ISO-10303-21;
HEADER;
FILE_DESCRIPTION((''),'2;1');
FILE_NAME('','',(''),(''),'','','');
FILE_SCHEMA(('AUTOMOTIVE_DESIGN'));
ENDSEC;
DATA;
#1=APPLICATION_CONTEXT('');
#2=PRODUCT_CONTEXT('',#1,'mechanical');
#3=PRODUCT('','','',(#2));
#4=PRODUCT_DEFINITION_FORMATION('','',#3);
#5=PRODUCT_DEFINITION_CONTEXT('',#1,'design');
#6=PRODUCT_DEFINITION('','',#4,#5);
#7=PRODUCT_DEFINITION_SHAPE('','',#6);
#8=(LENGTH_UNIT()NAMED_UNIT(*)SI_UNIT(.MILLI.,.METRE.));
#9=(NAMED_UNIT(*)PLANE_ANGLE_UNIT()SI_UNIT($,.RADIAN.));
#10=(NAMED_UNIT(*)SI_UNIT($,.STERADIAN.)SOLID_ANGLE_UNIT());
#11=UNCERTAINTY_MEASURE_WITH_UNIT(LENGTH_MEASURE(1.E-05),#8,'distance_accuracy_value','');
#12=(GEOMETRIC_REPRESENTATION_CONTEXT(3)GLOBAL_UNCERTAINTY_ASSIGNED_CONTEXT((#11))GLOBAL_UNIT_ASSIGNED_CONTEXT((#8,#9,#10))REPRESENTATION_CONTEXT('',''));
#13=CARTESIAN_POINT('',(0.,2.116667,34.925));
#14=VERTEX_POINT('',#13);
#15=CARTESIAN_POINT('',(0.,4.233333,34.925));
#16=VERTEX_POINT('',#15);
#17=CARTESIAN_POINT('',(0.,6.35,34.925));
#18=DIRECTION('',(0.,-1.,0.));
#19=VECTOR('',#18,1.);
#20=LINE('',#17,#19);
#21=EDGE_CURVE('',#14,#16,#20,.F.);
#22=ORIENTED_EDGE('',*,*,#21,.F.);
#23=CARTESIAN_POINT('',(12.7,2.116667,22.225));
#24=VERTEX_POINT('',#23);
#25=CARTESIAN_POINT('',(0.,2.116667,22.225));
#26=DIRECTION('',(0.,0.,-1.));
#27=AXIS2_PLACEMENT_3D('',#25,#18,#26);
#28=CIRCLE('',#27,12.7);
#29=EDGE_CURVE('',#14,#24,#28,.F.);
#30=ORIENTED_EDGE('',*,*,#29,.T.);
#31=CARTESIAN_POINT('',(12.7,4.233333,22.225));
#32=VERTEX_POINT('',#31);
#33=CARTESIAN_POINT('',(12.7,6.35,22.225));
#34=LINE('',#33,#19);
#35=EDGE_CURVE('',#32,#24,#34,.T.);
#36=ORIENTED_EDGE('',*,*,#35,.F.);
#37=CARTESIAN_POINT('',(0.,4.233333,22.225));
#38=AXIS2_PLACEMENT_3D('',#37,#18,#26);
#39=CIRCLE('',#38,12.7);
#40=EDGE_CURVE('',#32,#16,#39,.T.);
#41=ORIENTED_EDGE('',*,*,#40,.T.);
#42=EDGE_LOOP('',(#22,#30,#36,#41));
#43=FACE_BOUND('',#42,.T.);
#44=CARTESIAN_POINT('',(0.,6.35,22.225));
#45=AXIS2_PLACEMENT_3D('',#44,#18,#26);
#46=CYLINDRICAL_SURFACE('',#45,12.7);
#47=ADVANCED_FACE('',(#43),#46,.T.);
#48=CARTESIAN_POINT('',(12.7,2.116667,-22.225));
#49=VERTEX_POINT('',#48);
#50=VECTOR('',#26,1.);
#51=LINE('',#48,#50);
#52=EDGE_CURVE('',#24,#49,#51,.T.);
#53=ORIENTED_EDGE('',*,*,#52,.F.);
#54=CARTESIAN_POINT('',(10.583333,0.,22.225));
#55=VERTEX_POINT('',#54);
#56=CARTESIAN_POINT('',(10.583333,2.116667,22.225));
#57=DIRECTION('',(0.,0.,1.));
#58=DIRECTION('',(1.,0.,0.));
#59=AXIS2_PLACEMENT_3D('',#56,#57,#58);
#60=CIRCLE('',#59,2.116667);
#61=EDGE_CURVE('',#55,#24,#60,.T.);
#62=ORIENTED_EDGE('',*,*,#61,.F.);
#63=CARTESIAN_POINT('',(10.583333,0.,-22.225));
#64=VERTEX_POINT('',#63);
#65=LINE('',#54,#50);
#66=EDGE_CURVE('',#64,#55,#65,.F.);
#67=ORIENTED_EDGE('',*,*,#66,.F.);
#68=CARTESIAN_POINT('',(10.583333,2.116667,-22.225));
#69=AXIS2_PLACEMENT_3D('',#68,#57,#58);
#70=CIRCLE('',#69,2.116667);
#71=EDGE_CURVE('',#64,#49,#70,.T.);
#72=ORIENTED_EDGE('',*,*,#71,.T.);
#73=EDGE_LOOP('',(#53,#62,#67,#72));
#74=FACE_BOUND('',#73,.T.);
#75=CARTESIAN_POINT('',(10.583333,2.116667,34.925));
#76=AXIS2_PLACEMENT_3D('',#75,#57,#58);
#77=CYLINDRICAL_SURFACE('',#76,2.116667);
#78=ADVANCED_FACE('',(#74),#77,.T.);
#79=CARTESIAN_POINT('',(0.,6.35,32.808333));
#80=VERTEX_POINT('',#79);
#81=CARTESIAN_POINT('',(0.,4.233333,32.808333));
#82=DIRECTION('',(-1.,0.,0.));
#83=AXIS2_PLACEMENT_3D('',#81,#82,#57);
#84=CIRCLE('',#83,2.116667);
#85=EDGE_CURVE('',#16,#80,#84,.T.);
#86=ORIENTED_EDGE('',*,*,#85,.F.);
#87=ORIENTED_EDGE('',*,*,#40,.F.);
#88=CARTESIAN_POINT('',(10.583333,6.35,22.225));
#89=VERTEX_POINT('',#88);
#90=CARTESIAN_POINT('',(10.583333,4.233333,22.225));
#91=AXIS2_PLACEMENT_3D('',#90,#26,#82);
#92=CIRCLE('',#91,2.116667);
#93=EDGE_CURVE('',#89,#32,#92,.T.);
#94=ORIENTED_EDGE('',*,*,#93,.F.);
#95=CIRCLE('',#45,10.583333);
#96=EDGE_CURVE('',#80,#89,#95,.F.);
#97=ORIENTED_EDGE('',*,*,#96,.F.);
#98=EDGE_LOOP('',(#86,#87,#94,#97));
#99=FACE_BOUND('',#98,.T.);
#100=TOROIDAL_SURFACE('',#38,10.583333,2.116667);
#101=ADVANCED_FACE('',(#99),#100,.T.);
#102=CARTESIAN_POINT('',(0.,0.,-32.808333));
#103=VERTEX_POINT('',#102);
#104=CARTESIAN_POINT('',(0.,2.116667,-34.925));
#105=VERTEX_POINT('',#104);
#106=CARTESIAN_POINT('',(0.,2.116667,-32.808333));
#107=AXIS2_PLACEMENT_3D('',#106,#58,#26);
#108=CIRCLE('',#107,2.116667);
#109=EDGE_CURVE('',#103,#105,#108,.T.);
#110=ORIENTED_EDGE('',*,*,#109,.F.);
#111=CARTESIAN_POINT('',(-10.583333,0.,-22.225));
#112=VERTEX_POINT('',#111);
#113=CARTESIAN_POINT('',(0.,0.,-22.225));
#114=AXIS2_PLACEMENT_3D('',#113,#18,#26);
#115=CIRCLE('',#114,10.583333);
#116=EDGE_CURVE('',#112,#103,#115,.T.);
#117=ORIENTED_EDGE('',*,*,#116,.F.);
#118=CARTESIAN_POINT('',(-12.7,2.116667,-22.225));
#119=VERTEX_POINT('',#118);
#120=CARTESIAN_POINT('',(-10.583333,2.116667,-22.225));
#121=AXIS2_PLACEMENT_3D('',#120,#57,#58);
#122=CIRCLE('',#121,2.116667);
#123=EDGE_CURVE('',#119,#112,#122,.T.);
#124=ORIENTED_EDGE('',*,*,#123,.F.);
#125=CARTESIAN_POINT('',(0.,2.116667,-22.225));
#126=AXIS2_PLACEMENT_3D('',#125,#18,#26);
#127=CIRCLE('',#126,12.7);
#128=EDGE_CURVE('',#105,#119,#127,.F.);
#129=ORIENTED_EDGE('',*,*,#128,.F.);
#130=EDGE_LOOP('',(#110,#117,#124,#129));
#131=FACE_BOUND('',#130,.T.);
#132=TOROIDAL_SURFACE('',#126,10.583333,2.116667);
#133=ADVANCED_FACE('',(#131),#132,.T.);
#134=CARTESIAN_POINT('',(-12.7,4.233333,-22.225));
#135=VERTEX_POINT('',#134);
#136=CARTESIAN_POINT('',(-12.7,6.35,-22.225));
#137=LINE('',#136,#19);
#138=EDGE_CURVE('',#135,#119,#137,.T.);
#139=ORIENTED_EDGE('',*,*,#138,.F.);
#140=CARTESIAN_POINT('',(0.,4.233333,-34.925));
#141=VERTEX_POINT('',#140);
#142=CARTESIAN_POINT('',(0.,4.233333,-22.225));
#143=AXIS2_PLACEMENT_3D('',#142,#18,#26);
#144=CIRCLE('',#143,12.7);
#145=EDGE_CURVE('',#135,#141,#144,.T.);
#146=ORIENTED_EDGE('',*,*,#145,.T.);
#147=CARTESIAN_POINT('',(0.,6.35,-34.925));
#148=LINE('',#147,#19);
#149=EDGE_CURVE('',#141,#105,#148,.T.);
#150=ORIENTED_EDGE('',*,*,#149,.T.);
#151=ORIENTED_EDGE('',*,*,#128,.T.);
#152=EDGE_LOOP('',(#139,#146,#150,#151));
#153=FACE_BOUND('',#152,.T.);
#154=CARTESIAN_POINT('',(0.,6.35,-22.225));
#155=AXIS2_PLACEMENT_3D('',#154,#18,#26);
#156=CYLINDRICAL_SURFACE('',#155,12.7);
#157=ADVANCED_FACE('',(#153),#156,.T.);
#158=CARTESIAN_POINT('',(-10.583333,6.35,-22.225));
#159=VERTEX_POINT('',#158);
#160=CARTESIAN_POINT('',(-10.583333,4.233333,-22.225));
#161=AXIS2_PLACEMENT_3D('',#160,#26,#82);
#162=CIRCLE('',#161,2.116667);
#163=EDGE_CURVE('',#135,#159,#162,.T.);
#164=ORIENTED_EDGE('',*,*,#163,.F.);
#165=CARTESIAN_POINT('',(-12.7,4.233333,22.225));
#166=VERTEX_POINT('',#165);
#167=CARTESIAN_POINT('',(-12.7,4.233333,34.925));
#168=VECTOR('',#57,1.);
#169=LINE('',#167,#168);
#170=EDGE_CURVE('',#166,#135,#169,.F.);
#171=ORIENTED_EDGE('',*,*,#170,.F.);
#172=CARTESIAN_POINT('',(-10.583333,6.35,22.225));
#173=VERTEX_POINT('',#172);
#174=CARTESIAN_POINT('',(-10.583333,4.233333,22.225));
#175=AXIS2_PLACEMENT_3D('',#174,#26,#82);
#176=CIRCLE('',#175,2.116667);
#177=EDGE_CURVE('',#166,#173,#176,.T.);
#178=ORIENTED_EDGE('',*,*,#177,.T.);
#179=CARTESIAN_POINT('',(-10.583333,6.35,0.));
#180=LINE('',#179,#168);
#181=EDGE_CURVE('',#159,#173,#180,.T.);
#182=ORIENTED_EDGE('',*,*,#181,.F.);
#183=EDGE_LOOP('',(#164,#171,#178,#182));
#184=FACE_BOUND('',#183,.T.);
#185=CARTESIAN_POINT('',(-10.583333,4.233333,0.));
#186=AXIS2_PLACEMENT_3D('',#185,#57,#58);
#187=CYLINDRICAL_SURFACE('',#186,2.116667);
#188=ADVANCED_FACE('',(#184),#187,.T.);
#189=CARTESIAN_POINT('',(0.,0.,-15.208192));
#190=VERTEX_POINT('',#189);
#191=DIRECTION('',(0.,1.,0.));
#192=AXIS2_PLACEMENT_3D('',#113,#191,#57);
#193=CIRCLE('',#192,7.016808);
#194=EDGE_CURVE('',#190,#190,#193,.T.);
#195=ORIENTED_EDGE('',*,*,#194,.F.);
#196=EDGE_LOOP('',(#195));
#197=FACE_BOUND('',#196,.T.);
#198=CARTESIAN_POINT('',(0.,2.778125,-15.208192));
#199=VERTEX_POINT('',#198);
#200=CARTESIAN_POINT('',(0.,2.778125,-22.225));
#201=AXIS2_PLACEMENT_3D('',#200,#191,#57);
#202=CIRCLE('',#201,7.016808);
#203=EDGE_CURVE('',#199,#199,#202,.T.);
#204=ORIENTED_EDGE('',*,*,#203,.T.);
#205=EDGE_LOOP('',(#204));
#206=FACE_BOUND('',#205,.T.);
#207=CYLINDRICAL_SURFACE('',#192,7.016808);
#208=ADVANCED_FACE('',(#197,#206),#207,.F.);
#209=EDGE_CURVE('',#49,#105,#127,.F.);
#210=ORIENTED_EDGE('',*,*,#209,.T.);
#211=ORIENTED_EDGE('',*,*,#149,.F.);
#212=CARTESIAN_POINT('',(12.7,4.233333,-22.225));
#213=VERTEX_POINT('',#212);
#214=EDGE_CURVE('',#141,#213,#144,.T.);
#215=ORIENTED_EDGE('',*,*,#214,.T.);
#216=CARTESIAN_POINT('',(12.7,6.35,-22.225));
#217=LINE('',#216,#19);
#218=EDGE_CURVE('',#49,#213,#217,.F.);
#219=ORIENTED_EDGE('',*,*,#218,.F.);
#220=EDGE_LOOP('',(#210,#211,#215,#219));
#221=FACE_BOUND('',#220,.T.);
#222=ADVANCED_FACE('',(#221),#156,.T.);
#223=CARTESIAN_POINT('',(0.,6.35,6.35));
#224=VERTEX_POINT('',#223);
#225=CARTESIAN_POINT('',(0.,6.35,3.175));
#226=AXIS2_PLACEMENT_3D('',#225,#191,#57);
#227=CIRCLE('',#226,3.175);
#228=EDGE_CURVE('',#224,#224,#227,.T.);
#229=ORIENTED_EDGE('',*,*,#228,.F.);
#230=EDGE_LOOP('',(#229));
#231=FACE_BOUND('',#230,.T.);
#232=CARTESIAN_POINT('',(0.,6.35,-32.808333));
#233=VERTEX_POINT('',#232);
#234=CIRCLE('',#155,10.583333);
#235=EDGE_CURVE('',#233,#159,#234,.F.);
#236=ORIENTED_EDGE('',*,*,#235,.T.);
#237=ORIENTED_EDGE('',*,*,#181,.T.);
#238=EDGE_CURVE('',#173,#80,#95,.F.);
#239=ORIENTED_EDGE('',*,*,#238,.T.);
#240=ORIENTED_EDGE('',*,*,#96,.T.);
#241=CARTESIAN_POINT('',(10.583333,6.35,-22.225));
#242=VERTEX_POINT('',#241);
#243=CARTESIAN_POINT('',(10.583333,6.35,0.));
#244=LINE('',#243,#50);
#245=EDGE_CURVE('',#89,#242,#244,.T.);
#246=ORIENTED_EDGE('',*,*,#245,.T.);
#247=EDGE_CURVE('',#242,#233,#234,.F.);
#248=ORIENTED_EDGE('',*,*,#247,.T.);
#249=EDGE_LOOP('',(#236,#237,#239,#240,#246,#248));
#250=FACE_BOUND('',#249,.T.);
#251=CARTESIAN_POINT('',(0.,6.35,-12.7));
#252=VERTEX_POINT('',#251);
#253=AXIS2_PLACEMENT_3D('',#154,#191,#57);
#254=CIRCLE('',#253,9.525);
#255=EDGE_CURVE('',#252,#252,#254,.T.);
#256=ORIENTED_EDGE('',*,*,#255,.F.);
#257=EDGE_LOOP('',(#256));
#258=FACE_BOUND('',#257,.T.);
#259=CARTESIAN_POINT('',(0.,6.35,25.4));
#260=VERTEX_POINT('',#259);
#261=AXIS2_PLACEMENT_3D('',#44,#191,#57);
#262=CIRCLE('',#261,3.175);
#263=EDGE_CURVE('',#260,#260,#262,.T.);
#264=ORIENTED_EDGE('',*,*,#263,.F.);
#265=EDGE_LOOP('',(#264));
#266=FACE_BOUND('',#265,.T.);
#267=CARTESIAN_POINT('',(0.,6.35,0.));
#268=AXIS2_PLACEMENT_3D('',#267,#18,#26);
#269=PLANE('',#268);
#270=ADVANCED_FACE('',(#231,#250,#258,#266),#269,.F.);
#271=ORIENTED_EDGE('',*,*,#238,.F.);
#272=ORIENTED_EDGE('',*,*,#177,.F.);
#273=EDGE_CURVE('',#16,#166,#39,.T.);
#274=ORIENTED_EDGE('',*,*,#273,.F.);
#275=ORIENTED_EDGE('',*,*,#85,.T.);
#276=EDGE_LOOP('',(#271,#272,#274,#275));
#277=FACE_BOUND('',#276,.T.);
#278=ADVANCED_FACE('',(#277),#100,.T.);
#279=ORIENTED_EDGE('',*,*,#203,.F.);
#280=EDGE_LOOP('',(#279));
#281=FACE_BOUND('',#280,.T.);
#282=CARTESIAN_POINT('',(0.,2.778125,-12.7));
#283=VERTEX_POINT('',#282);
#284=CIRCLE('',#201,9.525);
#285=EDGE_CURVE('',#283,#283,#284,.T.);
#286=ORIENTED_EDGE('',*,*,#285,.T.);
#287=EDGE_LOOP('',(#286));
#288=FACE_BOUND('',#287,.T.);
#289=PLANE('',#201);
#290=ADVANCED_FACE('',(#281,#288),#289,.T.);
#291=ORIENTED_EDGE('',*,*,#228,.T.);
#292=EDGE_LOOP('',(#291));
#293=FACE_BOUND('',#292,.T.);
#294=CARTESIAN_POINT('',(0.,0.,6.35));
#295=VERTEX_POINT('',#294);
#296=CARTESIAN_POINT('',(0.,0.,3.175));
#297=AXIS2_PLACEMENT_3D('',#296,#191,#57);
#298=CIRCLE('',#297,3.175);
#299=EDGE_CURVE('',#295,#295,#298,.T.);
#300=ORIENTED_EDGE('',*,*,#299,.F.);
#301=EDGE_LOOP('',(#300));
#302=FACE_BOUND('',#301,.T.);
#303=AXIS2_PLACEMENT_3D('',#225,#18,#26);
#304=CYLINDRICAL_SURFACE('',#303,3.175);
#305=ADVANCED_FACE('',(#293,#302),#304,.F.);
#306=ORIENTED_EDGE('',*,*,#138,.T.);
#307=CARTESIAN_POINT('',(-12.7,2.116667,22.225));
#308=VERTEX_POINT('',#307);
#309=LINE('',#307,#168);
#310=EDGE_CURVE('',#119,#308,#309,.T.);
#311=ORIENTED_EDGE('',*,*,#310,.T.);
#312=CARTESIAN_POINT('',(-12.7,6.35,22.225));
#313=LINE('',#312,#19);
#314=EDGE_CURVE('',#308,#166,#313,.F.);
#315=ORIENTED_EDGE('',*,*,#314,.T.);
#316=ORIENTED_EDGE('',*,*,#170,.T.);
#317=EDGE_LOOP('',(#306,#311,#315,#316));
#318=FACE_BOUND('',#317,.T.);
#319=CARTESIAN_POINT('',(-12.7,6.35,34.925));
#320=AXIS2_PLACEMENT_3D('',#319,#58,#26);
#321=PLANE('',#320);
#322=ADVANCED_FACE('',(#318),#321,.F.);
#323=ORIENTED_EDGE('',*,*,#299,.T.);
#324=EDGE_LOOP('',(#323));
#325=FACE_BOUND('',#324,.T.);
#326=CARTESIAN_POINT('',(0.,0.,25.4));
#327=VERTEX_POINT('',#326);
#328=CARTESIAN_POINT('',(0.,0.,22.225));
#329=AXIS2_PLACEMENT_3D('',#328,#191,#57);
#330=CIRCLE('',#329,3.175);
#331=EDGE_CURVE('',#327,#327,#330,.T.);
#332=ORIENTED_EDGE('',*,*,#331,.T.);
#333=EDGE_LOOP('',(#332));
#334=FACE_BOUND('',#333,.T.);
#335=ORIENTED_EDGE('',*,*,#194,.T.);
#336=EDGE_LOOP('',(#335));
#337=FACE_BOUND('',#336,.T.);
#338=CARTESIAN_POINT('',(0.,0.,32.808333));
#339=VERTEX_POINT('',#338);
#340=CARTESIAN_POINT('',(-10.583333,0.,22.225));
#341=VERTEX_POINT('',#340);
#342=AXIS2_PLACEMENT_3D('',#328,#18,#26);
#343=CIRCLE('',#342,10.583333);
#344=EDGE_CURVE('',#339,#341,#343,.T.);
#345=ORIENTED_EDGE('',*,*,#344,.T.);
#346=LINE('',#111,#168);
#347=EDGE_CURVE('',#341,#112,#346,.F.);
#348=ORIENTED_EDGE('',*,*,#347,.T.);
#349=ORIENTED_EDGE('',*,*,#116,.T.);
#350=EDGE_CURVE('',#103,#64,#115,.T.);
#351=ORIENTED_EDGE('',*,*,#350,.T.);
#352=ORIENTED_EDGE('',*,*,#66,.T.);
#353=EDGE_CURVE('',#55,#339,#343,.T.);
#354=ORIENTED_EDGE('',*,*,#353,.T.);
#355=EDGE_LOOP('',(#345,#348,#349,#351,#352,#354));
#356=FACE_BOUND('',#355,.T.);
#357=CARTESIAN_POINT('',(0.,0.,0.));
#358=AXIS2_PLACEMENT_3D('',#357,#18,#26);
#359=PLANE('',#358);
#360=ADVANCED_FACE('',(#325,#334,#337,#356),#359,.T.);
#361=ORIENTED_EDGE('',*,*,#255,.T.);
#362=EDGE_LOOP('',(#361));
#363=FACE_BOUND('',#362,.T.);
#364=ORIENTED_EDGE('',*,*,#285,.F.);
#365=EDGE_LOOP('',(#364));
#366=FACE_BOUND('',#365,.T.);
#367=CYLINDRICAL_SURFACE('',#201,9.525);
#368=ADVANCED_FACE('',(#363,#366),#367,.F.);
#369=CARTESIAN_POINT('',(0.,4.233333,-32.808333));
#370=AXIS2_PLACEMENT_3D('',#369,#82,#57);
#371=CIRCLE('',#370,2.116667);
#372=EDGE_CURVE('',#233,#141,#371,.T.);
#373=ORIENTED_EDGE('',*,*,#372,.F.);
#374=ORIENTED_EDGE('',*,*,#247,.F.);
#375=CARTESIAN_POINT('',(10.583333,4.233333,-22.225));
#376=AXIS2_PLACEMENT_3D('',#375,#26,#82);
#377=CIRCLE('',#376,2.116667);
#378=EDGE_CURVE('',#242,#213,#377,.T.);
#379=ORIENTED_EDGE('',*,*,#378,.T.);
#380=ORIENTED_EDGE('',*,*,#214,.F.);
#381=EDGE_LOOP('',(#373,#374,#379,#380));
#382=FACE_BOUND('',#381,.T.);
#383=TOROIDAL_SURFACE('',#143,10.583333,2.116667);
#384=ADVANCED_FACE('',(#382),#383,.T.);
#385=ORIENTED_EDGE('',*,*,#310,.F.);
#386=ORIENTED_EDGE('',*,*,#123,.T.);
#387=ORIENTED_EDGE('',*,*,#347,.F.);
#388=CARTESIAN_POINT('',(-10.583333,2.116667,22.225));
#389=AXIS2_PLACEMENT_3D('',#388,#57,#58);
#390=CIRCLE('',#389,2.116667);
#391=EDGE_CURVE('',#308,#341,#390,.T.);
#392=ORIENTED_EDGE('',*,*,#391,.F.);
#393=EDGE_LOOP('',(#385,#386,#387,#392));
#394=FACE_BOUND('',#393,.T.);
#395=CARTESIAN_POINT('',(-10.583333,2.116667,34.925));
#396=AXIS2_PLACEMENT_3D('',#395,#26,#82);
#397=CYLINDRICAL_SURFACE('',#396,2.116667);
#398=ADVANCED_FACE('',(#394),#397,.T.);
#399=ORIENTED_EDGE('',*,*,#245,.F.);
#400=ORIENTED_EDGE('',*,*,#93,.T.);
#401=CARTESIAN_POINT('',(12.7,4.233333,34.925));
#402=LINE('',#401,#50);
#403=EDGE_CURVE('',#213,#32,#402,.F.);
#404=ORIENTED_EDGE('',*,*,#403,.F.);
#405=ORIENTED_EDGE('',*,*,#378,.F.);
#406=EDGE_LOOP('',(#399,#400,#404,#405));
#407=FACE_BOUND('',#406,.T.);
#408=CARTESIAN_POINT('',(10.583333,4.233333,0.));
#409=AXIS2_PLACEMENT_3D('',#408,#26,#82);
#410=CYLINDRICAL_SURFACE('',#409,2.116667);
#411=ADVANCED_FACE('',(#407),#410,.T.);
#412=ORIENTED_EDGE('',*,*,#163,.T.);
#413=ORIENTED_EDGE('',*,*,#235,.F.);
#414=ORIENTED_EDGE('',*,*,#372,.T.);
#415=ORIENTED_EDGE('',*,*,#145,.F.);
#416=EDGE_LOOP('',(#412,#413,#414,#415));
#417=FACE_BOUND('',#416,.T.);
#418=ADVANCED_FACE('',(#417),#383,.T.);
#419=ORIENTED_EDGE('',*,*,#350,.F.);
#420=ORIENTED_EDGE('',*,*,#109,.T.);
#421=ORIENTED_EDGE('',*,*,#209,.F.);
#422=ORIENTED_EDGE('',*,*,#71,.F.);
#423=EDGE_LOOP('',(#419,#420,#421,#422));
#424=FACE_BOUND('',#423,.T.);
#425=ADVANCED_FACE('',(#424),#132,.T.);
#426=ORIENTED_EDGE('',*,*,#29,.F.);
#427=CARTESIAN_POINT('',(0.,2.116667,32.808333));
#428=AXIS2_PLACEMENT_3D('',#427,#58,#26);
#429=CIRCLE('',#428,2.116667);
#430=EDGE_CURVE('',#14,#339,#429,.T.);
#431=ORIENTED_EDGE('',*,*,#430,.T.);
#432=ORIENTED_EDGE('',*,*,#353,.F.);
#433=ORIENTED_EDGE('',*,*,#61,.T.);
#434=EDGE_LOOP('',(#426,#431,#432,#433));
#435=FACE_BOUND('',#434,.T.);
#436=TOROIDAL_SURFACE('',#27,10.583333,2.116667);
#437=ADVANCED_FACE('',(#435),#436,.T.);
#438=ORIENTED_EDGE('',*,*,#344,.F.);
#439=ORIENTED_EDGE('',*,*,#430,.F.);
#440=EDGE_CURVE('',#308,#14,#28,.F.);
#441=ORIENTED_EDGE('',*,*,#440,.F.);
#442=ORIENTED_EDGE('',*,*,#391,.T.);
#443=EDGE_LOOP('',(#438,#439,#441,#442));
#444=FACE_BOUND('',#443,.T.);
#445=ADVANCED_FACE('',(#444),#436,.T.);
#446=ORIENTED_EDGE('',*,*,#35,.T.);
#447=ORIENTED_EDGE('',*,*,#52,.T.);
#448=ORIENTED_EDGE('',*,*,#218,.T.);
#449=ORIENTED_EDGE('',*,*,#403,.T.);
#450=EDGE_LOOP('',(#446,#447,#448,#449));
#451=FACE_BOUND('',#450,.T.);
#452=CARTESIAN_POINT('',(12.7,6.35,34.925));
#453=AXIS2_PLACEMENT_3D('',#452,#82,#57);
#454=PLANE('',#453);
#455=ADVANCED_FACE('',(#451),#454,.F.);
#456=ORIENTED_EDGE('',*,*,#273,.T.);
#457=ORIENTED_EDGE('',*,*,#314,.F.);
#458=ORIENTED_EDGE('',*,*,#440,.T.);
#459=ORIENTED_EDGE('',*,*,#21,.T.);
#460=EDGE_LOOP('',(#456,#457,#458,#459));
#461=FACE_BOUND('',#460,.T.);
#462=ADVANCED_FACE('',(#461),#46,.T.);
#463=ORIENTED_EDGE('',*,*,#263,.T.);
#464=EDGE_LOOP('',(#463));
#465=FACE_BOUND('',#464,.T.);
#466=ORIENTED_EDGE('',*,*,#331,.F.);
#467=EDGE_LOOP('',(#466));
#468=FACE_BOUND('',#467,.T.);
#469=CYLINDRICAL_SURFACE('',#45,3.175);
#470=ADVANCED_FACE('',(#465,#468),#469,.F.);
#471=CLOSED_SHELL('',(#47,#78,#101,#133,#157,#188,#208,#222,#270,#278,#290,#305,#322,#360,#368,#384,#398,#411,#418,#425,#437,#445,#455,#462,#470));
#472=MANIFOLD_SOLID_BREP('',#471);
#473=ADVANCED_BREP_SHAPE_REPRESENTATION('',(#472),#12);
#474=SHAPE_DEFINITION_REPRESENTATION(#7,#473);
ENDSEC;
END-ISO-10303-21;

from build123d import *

# Parameters (mm, degrees)
SKETCH1_W           = 25.4
SKETCH1_H           = 69.85
SKETCH1_R           = 3.175
BOSS_EXTRUDE1_DEPTH = 6.35
FILLET1_R           = 12.7
FILLET2_R           = 2.116666667
SKETCH5_R           = 9.525
SKETCH5_R_2         = 7.016807895
CUT_EXTRUDE2_DEPTH  = 3.571875
SKETCH5_2_R         = 7.016807895
CUT_EXTRUDE3_DEPTH  = 6.35


with BuildPart() as part:
    # Sketch1 → Boss-Extrude1 (new body)
    with BuildSketch(Plane(origin=(0, 0, 0), x_dir=(1, 0, 0), z_dir=(0, 1, 0))):
        Rectangle(SKETCH1_W, SKETCH1_H)
        with Locations(Location((0, -3.175, 0), (0, 0, 270))):
            Circle(SKETCH1_R, mode=Mode.SUBTRACT)
        with Locations(Location((0, -22.225, 0), (0, 0, 270))):
            Circle(SKETCH1_R, mode=Mode.SUBTRACT)
    extrude(amount=BOSS_EXTRUDE1_DEPTH)

    # Fillet1
    fillet1_edges = [part.edges().sort_by_distance(p)[0] for p in [
        (-12.7, 3.175, -34.925),
        (12.7, 3.175, -34.925),
        (-12.7, 3.175, 34.925),
        (12.7, 3.175, 34.925),
    ]]
    fillet(fillet1_edges, radius=FILLET1_R - 0.0001)  # a hair under: the kernel refuses the full size

    # Fillet2
    fillet2_edges = [part.edges().sort_by_distance(p)[0] for p in [
        (-12.7, 0, 0),
        (-12.7, 6.35, 0),
        (12.7, 0, 0),
        (8.98028541, 0, 31.20528541),
        (-8.98028541, 0, 31.20528541),
        (8.98028541, 0, -31.20528541),
        (-8.98028541, 0, -31.20528541),
        (12.7, 6.35, 0),
        (8.98028541, 6.35, 31.20528541),
        (-8.98028541, 6.35, 31.20528541),
        (8.98028541, 6.35, -31.20528541),
        (-8.98028541, 6.35, -31.20528541),
    ]]
    fillet(fillet2_edges, radius=FILLET2_R)

    # Sketch5 → Cut-Extrude2 (cut)
    with BuildSketch(Plane(origin=(0, 6.35, 0), x_dir=(1, 0, 0), z_dir=(0, 1, 0))):
        with Locations(Location((0, 22.225, 0), (0, 0, 270))):
            Circle(SKETCH5_R)
        with Locations(Location((0, 22.225, 0), (0, 0, 270))):
            Circle(SKETCH5_R_2, mode=Mode.SUBTRACT)
    extrude(amount=-CUT_EXTRUDE2_DEPTH, mode=Mode.SUBTRACT)

    # Sketch5<2> → Cut-Extrude3 (cut)
    with BuildSketch(Plane(origin=(0, 6.35, 0), x_dir=(1, 0, 0), z_dir=(0, 1, 0))):
        with Locations(Location((0, 22.225, 0), (0, 0, 270))):
            Circle(SKETCH5_2_R)
    extrude(amount=-CUT_EXTRUDE3_DEPTH, mode=Mode.SUBTRACT)


solid = part.part
